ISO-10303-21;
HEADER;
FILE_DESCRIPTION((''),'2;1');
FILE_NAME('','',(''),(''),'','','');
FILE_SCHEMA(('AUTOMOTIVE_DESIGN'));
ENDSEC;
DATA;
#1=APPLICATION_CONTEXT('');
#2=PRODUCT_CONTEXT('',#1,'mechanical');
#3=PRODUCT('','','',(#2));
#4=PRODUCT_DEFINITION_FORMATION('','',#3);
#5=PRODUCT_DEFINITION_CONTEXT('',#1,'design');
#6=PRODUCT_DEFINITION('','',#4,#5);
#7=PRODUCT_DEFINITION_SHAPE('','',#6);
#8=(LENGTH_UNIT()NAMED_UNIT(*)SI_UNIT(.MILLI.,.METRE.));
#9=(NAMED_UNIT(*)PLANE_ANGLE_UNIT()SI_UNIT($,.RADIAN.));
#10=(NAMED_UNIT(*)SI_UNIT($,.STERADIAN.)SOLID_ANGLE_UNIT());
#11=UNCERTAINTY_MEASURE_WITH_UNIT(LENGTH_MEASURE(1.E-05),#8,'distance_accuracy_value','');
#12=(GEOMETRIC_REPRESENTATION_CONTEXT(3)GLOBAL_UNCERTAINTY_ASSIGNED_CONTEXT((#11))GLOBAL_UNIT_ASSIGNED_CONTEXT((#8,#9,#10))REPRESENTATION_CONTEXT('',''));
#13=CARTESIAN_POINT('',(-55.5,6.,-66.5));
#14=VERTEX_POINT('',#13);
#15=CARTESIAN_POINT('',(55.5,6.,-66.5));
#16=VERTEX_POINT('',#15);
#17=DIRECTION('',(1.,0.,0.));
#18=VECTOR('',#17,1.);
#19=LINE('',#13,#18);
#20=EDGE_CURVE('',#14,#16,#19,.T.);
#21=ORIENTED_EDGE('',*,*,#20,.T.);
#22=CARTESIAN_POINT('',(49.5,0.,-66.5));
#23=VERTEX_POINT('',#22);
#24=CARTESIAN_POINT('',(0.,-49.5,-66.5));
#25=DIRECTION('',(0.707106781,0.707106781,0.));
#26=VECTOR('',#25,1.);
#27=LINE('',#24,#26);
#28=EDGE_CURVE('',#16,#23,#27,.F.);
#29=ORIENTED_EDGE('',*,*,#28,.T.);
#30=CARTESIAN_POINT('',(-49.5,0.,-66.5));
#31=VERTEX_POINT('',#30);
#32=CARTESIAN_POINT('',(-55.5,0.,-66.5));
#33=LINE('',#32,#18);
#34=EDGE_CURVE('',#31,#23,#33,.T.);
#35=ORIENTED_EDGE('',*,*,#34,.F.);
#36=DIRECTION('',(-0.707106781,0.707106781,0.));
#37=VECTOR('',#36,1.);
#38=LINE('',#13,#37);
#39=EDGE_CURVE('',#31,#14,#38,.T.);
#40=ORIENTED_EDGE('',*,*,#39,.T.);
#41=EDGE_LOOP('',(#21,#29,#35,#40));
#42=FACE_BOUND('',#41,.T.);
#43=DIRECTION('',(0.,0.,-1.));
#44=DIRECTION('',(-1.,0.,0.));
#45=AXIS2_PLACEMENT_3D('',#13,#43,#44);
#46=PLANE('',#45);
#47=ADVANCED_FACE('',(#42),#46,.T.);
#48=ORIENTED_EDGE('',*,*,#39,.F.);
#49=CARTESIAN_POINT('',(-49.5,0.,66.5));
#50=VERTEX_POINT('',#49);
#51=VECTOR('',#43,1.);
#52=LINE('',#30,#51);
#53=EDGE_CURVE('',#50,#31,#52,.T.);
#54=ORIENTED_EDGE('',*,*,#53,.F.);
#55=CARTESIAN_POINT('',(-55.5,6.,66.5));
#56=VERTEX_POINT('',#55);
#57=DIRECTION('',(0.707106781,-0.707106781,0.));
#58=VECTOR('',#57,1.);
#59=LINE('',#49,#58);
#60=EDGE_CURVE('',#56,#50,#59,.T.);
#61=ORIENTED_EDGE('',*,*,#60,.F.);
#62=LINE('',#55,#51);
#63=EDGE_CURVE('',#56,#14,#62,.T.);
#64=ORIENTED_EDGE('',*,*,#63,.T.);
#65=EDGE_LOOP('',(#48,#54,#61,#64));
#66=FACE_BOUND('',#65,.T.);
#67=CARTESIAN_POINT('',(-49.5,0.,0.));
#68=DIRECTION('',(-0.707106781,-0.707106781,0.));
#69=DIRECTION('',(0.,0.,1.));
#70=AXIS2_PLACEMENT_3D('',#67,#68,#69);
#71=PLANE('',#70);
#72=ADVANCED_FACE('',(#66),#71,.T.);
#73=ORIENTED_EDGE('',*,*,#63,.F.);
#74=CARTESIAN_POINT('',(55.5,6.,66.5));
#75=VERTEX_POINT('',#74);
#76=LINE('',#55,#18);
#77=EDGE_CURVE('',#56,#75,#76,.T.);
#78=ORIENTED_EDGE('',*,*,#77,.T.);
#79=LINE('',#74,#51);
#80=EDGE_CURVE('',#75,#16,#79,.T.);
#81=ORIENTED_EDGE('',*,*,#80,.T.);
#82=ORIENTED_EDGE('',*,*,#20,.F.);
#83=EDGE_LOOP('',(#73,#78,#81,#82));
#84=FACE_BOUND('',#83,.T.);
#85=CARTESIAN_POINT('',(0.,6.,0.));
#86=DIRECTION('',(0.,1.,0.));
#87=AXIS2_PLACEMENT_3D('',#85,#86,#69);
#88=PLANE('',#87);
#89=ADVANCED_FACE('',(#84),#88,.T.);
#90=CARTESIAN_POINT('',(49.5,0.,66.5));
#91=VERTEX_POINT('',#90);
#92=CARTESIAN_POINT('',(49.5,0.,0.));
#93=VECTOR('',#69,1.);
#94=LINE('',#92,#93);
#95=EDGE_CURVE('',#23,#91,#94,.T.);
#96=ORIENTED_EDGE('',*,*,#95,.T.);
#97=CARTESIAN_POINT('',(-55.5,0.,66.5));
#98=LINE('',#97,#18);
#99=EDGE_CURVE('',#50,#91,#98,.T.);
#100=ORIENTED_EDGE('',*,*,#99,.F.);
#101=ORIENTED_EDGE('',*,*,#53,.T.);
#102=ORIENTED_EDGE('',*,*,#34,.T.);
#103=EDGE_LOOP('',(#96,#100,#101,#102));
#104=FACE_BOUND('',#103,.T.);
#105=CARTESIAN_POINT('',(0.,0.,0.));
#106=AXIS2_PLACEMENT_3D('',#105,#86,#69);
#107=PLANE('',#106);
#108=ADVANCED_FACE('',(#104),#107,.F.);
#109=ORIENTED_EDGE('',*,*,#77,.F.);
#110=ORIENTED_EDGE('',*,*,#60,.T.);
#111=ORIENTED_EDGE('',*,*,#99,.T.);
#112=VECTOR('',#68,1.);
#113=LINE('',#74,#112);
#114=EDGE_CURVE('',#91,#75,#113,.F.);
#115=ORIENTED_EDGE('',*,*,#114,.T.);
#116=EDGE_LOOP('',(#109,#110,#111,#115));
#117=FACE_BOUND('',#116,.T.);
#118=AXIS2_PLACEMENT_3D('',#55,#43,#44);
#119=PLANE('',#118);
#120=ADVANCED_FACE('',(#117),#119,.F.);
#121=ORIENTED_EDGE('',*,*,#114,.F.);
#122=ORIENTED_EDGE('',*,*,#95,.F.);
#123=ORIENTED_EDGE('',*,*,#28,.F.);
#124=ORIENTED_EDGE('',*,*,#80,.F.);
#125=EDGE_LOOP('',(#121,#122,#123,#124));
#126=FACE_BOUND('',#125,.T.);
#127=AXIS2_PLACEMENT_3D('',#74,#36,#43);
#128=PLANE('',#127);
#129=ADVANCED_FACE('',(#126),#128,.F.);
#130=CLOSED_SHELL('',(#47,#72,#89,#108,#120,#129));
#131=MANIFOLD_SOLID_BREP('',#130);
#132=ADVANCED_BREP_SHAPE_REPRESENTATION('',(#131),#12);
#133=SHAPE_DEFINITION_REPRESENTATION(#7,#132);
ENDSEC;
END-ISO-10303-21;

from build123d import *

# Parameters (mm, degrees)
SKETCH1_W           = 111
SKETCH1_H           = 133
BOSS_EXTRUDE1_DEPTH = 6
CHAMFER1_SIZE       = 6


with BuildPart() as part:
    # Sketch1 → Boss-Extrude1 (new body)
    with BuildSketch(Plane(origin=(0, 0, 0), x_dir=(1, 0, 0), z_dir=(0, 1, 0))):
        Rectangle(SKETCH1_W, SKETCH1_H)
    extrude(amount=BOSS_EXTRUDE1_DEPTH)

    # Chamfer1
    chamfer1_edges = [part.edges().sort_by_distance(p)[0] for p in [
        (55.5, 0, 0),
        (-55.5, 0, 0),
    ]]
    chamfer(chamfer1_edges, length=CHAMFER1_SIZE - 0.0001)  # a hair under: the kernel refuses the full size


solid = part.part
